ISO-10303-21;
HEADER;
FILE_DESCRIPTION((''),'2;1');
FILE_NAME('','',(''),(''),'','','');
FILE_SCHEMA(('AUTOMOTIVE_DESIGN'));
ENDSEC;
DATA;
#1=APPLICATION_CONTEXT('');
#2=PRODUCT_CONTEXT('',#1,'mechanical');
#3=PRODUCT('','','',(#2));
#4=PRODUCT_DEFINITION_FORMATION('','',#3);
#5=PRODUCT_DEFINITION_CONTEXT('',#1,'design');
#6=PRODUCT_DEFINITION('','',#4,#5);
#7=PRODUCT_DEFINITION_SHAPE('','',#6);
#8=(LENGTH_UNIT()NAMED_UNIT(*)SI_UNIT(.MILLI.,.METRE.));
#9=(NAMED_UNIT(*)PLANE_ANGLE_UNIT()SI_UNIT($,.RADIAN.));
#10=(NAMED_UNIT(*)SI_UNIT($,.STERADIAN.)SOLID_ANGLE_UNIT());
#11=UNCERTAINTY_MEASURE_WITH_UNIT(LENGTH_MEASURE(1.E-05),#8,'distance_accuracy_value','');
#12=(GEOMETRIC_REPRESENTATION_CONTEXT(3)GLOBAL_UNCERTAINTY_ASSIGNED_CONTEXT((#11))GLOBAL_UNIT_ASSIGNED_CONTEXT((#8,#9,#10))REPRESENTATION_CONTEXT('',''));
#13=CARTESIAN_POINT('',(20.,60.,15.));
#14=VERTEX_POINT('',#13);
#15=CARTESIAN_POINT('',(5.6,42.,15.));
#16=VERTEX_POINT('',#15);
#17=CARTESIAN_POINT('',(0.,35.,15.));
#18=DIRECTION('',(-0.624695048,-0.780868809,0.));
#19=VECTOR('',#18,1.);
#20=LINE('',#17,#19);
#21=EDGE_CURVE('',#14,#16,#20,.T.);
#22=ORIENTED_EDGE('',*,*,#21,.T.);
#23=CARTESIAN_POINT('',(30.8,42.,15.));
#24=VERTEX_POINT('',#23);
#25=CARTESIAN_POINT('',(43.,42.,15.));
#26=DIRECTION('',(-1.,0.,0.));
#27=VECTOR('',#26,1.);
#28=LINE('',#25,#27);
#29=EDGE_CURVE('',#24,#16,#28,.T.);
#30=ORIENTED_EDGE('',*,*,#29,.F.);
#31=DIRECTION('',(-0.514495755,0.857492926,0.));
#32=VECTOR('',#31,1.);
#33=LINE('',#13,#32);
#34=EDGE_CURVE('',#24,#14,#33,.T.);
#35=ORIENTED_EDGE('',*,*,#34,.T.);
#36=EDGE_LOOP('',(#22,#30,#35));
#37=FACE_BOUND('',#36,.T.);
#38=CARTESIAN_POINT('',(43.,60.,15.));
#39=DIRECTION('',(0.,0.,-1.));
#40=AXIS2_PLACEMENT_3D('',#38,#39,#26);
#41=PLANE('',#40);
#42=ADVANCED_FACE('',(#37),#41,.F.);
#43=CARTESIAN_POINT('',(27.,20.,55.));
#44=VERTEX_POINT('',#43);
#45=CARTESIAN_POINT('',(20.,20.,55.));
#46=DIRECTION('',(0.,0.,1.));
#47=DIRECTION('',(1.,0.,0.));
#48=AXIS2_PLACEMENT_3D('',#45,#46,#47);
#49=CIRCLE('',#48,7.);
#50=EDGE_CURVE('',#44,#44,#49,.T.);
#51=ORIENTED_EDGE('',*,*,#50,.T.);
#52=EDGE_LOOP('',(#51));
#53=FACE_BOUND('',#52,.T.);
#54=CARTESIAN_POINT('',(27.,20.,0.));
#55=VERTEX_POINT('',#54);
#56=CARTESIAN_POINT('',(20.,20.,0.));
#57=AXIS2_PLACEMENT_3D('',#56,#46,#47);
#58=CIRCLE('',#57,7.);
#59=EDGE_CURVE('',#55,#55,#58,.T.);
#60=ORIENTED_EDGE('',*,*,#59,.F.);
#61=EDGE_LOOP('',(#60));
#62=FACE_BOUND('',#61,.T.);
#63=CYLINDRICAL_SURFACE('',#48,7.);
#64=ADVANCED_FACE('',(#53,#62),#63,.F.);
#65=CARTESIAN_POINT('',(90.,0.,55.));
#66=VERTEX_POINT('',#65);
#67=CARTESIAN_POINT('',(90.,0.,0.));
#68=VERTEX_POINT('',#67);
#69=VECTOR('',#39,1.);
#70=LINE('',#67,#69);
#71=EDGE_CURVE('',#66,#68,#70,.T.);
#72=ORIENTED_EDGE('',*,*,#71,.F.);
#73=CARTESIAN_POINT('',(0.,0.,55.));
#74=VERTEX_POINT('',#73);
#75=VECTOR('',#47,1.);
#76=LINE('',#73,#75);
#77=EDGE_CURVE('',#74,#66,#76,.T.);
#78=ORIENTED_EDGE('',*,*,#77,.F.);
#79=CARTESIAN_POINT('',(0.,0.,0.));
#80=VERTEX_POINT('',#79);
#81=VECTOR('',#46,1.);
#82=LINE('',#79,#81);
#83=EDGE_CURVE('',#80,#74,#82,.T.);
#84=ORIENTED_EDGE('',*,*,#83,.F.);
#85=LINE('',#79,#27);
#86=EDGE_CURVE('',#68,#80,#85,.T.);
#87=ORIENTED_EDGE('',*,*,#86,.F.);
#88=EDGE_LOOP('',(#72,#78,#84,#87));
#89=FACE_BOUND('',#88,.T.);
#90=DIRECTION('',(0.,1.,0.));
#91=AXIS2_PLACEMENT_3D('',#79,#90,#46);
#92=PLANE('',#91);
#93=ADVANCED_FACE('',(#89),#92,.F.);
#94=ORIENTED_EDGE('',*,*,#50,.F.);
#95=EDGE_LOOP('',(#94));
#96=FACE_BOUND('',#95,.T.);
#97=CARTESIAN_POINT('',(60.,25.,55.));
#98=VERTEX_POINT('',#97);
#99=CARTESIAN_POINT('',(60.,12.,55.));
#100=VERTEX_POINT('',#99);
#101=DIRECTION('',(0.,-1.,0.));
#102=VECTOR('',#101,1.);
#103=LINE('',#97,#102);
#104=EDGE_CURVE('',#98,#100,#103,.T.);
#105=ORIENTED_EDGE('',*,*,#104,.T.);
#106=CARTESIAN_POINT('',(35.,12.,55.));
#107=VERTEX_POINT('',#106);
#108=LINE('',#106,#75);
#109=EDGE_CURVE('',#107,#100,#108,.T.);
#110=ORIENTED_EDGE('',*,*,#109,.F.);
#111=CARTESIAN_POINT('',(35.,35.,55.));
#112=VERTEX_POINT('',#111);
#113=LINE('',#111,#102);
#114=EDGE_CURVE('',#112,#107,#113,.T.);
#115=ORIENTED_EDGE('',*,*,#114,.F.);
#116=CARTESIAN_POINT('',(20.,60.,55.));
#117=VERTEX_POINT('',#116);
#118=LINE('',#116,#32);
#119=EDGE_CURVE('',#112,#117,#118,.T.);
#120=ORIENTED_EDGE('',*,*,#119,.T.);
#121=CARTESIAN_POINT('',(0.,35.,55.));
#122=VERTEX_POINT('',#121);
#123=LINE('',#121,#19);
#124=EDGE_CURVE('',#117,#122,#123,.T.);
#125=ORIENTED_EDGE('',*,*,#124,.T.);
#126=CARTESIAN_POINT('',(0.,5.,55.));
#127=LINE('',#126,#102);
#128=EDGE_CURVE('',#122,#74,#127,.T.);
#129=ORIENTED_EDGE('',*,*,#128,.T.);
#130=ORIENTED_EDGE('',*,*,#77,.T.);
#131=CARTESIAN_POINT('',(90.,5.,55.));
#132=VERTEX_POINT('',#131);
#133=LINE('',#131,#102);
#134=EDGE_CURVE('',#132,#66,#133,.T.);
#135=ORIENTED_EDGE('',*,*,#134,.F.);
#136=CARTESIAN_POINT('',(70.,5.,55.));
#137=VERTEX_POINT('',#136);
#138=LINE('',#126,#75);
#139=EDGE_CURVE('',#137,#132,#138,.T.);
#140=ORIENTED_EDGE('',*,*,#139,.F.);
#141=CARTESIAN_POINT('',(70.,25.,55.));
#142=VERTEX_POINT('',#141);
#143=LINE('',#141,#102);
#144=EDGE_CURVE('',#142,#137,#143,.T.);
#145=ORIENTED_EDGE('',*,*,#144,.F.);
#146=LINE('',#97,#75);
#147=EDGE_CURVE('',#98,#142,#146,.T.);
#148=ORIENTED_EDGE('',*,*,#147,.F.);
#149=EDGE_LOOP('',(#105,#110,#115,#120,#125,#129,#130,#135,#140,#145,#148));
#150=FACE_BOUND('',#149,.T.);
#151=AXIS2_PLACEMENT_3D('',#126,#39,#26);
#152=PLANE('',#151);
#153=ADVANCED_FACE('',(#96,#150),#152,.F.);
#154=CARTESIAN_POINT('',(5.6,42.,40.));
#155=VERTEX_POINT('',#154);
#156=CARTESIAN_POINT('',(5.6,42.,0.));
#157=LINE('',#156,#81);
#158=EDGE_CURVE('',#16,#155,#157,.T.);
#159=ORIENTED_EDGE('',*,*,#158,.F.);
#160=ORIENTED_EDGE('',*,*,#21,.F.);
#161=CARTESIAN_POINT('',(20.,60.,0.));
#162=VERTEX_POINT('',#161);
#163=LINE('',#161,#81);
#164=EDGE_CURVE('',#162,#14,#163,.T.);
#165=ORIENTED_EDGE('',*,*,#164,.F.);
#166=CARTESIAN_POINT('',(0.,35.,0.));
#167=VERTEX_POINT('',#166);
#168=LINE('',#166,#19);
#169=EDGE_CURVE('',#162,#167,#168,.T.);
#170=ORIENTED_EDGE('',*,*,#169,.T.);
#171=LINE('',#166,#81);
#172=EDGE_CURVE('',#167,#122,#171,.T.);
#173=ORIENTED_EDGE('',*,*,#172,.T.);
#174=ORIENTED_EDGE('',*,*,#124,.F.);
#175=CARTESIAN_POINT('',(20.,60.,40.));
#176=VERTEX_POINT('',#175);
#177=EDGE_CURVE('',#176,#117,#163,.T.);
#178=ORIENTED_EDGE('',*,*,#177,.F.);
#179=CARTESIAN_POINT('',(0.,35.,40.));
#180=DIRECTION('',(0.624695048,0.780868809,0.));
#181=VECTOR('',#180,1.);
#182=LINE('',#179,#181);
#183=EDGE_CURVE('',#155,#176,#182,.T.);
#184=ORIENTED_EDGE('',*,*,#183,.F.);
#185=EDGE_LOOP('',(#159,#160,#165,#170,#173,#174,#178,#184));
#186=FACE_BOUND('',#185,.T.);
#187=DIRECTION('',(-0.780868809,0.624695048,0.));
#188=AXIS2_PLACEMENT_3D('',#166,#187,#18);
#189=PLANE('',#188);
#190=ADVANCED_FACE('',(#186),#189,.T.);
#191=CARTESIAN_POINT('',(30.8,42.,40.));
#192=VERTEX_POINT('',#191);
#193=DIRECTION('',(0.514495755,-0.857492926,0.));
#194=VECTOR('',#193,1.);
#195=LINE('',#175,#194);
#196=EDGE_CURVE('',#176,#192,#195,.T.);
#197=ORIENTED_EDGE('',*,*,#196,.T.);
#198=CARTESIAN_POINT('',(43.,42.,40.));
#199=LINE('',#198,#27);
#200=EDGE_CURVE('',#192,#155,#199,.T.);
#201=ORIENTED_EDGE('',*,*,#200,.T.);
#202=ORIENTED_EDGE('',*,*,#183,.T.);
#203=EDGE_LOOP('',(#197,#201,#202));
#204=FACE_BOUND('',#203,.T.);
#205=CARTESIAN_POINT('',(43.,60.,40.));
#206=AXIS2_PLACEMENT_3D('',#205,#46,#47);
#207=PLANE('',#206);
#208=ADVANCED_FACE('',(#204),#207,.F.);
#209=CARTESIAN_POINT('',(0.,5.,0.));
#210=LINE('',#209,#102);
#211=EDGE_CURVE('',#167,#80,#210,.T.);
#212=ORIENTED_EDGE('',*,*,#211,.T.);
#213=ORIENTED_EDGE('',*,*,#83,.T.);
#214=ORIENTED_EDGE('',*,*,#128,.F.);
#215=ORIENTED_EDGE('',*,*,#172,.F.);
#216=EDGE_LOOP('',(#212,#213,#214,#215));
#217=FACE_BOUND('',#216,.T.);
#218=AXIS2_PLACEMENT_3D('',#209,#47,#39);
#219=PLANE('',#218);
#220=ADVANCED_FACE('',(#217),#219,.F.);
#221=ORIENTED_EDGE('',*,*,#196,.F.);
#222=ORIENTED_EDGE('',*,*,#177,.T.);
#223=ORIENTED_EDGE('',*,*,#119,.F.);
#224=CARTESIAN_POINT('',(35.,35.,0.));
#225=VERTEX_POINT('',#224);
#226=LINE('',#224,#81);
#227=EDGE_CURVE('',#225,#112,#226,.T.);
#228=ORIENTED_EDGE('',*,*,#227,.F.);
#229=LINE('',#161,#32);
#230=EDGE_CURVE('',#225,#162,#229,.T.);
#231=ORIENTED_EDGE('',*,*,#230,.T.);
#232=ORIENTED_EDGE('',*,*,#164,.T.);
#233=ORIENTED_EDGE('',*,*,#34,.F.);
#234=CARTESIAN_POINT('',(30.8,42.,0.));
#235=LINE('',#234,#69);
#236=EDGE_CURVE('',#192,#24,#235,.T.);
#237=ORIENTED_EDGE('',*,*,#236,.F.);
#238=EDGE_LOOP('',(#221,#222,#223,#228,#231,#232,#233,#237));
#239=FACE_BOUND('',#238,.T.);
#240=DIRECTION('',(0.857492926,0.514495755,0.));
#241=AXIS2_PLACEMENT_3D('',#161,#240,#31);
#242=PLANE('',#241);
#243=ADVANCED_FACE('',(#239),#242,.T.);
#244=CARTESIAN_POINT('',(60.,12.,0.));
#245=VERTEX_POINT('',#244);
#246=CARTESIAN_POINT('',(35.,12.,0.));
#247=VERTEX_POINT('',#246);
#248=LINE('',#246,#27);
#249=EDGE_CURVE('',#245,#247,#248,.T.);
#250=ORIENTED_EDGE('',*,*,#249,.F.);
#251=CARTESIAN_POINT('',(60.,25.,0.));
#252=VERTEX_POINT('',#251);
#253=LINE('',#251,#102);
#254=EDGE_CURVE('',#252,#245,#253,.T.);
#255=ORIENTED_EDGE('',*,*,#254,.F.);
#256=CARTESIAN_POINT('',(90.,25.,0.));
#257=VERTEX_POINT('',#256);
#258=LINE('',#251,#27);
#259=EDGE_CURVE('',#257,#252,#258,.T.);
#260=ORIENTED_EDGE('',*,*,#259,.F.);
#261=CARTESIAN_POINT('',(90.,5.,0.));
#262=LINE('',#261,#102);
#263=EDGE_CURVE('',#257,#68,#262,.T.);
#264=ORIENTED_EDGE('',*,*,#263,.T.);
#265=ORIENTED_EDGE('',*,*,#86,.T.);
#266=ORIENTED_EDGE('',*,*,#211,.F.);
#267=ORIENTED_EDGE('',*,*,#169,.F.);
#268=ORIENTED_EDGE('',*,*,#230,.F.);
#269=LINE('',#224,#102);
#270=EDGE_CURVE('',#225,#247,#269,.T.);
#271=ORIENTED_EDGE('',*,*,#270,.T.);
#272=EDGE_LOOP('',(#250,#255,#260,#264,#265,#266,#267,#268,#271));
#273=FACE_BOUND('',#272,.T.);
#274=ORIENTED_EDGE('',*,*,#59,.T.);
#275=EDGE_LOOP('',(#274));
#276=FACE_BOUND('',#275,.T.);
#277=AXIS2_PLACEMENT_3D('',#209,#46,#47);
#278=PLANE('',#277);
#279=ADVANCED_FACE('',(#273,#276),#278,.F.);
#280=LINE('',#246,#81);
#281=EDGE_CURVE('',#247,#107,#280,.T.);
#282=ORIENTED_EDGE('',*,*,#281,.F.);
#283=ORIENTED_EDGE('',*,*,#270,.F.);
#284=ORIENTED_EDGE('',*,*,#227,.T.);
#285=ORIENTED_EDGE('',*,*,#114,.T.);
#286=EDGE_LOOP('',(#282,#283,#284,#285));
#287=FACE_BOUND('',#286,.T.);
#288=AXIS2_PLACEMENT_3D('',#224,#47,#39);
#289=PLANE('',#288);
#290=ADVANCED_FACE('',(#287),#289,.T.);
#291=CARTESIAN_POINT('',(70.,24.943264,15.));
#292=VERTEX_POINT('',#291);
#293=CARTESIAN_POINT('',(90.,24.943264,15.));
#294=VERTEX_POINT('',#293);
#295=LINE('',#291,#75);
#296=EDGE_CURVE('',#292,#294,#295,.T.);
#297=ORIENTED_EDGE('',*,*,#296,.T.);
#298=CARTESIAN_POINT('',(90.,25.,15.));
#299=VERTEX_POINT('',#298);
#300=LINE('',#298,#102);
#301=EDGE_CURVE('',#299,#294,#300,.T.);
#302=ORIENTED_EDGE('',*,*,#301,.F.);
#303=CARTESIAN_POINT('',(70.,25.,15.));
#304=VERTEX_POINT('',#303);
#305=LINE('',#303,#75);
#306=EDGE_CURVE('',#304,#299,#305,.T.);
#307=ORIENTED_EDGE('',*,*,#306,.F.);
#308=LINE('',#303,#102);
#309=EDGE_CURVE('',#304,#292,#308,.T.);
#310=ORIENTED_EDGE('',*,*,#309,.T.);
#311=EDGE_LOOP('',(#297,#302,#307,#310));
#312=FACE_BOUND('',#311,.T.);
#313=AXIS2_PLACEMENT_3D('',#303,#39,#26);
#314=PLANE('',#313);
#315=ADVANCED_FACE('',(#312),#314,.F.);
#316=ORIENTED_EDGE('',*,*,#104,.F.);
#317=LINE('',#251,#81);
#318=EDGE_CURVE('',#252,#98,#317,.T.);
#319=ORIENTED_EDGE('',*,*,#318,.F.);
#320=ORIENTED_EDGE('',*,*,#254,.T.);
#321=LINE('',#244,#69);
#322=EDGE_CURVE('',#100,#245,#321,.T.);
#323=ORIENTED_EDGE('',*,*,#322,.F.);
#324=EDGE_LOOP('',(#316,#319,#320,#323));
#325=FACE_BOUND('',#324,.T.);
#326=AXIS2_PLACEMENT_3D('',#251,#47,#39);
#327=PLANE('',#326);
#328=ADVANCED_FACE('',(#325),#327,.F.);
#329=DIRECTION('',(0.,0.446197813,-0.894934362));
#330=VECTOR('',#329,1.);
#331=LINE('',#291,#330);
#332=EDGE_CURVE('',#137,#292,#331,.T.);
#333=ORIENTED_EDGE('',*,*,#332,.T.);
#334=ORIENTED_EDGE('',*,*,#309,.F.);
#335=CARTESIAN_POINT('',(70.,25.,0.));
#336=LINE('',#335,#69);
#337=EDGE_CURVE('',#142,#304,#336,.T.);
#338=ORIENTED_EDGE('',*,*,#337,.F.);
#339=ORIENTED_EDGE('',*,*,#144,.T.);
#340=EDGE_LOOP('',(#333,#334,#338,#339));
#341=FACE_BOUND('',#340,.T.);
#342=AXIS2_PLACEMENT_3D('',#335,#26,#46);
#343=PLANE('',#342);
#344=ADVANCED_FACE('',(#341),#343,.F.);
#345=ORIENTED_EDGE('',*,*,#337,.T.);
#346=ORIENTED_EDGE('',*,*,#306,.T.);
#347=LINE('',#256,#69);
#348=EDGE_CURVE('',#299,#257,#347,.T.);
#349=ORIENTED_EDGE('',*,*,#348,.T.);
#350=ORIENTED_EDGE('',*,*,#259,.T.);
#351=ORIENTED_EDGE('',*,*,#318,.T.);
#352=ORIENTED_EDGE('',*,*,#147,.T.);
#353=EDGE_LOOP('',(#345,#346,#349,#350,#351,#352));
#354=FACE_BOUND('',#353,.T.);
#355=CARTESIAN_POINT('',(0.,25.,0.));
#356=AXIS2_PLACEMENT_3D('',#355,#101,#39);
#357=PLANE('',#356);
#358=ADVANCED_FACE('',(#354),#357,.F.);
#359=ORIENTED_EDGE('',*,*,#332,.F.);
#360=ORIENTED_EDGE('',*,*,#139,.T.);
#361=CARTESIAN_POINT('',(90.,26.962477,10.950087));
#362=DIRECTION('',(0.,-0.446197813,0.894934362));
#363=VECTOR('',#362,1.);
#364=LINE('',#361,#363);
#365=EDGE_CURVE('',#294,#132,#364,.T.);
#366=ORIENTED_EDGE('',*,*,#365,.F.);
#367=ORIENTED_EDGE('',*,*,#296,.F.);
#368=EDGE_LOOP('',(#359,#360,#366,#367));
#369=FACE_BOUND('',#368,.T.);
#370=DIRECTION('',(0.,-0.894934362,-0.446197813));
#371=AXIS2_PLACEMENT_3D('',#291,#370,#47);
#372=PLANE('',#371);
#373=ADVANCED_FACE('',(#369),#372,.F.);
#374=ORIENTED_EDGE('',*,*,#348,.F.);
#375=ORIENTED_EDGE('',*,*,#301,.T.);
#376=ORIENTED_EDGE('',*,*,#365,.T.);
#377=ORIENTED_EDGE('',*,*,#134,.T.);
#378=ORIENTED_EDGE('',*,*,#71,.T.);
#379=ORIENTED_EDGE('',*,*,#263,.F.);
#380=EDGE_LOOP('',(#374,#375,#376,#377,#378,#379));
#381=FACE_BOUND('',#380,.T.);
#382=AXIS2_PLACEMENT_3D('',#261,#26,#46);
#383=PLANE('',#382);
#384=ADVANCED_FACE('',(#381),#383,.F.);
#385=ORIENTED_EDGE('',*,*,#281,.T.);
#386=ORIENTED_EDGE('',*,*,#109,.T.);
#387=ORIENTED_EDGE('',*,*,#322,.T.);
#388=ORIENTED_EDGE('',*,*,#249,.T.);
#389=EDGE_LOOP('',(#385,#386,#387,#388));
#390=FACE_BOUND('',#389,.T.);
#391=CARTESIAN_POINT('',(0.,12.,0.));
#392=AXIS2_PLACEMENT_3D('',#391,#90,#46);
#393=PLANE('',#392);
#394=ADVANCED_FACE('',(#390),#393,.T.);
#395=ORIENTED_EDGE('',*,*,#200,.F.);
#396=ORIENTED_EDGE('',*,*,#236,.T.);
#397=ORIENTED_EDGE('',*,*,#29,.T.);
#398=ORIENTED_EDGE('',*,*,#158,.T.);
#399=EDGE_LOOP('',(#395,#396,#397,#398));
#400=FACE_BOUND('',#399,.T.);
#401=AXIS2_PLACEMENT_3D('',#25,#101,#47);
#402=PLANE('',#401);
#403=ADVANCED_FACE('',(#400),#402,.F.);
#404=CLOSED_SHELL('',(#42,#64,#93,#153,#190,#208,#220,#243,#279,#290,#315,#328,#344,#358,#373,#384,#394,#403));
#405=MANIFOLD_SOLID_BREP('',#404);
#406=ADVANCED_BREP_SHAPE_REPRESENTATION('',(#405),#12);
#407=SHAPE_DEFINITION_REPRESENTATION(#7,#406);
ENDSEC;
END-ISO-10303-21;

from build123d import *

# Parameters (mm, degrees)
SKETCH1_W             = 90
SKETCH1_H             = 55
BOSS_EXTRUDE1_DEPTH   = 5
SKETCH2_W             = 35
SKETCH2_H             = 55
BOSS_EXTRUDE2_DEPTH   = 30
F_1_0MM_DOWEL_HOLE1_D = 14
SKETCH5_W             = 10
SKETCH5_H             = 55
BOSS_EXTRUDE4_DEPTH   = 20
SKETCH8_W             = 20
SKETCH8_H             = 15
BOSS_EXTRUDE5_DEPTH   = 20
CHAMFER1_SIZE2        = 40
CHAMFER1_SIZE         = 19.943264322
SKETCH9_W             = 25
SKETCH9_H             = 55
BOSS_EXTRUDE6_DEPTH   = 7
BOSS_EXTRUDE7_DEPTH   = 55
SKETCH16_W            = 25
SKETCH16_H            = 18
BOSS_EXTRUDE8_DEPTH   = 43
SKETCH17_W            = 25
SKETCH17_H            = 18
CUT_EXTRUDE1_DEPTH    = 43
F_1_0MM_DOWEL_HOLE2_D = 14


with BuildPart() as part:
    # Sketch1 → Boss-Extrude1 (new body)
    with BuildSketch(Plane(origin=(0, 0, 0), x_dir=(1, 0, 0), z_dir=(0, 1, 0))):
        with Locations((45, -27.5)):
            Rectangle(SKETCH1_W, SKETCH1_H)
    extrude(amount=BOSS_EXTRUDE1_DEPTH)

    # Sketch2 → Boss-Extrude2 (add)
    with BuildSketch(Plane(origin=(0, 5, 0), x_dir=(1, 0, 0), z_dir=(0, 1, 0))):
        with Locations((17.5, -27.5)):
            Rectangle(SKETCH2_W, SKETCH2_H)
    extrude(amount=BOSS_EXTRUDE2_DEPTH)

    # Ø1.0mm Dowel Hole1 (through all)
    with Locations(Plane.XY.offset(55)):
        with Locations((20, 20)):
            Hole(F_1_0MM_DOWEL_HOLE1_D / 2)

    # Sketch5 → Boss-Extrude4 (add)
    with BuildSketch(Plane(origin=(0, 5, 0), x_dir=(1, 0, 0), z_dir=(0, 1, 0))):
        with Locations((65, -27.5)):
            Rectangle(SKETCH5_W, SKETCH5_H)
    extrude(amount=BOSS_EXTRUDE4_DEPTH)

    # Sketch8 → Boss-Extrude5 (add)
    with BuildSketch(Plane(origin=(0, 5, 0), x_dir=(1, 0, 0), z_dir=(0, 1, 0))):
        with Locations((80, -7.5)):
            Rectangle(SKETCH8_W, SKETCH8_H)
    extrude(amount=BOSS_EXTRUDE5_DEPTH)

    # Chamfer1
    chamfer1_edges = [part.edges().sort_by_distance(p)[0] for p in [
        (80, 5, 15),
    ]]
    chamfer1_side = [part.faces().sort_by_distance(p)[0] for p in [
        (80, 5.398865286, 15),
    ]]
    chamfer(chamfer1_edges, length=CHAMFER1_SIZE - 0.0001, length2=CHAMFER1_SIZE2 - 0.0001, reference=chamfer1_side[0])  # a hair under: the kernel refuses the full size

    # Sketch9 → Boss-Extrude6 (add)
    with BuildSketch(Plane(origin=(0, 5, 0), x_dir=(1, 0, 0), z_dir=(0, 1, 0))):
        with Locations((47.5, -27.5)):
            Rectangle(SKETCH9_W, SKETCH9_H)
    extrude(amount=BOSS_EXTRUDE6_DEPTH)

    # Sketch12 → Boss-Extrude7 (add)
    with BuildSketch(Plane.XY.offset(55)):
        Polygon((0, 35), (20, 60), (35, 35), (35, 12), (60, 12), (60, 25), (70, 25), (70, 5), (90, 5), (90, 0), (0, 0), align=None)
    extrude(amount=-BOSS_EXTRUDE7_DEPTH)

    # Sketch16 → Boss-Extrude8 (add)
    with BuildSketch(Plane.ZY):
        with Locations((27.5, 51)):
            Rectangle(SKETCH16_W, SKETCH16_H)
    extrude(amount=-BOSS_EXTRUDE8_DEPTH)

    # Sketch17 → Cut-Extrude1 (cut)
    with BuildSketch(Plane.ZY):
        with Locations((27.5, 51)):
            Rectangle(SKETCH17_W, SKETCH17_H)
    extrude(amount=-CUT_EXTRUDE1_DEPTH, mode=Mode.SUBTRACT)

    # Ø1.0mm Dowel Hole2 (through all)
    with Locations(Plane.XY.offset(55)):
        with Locations((20, 20)):
            Hole(F_1_0MM_DOWEL_HOLE2_D / 2)


solid = part.part
